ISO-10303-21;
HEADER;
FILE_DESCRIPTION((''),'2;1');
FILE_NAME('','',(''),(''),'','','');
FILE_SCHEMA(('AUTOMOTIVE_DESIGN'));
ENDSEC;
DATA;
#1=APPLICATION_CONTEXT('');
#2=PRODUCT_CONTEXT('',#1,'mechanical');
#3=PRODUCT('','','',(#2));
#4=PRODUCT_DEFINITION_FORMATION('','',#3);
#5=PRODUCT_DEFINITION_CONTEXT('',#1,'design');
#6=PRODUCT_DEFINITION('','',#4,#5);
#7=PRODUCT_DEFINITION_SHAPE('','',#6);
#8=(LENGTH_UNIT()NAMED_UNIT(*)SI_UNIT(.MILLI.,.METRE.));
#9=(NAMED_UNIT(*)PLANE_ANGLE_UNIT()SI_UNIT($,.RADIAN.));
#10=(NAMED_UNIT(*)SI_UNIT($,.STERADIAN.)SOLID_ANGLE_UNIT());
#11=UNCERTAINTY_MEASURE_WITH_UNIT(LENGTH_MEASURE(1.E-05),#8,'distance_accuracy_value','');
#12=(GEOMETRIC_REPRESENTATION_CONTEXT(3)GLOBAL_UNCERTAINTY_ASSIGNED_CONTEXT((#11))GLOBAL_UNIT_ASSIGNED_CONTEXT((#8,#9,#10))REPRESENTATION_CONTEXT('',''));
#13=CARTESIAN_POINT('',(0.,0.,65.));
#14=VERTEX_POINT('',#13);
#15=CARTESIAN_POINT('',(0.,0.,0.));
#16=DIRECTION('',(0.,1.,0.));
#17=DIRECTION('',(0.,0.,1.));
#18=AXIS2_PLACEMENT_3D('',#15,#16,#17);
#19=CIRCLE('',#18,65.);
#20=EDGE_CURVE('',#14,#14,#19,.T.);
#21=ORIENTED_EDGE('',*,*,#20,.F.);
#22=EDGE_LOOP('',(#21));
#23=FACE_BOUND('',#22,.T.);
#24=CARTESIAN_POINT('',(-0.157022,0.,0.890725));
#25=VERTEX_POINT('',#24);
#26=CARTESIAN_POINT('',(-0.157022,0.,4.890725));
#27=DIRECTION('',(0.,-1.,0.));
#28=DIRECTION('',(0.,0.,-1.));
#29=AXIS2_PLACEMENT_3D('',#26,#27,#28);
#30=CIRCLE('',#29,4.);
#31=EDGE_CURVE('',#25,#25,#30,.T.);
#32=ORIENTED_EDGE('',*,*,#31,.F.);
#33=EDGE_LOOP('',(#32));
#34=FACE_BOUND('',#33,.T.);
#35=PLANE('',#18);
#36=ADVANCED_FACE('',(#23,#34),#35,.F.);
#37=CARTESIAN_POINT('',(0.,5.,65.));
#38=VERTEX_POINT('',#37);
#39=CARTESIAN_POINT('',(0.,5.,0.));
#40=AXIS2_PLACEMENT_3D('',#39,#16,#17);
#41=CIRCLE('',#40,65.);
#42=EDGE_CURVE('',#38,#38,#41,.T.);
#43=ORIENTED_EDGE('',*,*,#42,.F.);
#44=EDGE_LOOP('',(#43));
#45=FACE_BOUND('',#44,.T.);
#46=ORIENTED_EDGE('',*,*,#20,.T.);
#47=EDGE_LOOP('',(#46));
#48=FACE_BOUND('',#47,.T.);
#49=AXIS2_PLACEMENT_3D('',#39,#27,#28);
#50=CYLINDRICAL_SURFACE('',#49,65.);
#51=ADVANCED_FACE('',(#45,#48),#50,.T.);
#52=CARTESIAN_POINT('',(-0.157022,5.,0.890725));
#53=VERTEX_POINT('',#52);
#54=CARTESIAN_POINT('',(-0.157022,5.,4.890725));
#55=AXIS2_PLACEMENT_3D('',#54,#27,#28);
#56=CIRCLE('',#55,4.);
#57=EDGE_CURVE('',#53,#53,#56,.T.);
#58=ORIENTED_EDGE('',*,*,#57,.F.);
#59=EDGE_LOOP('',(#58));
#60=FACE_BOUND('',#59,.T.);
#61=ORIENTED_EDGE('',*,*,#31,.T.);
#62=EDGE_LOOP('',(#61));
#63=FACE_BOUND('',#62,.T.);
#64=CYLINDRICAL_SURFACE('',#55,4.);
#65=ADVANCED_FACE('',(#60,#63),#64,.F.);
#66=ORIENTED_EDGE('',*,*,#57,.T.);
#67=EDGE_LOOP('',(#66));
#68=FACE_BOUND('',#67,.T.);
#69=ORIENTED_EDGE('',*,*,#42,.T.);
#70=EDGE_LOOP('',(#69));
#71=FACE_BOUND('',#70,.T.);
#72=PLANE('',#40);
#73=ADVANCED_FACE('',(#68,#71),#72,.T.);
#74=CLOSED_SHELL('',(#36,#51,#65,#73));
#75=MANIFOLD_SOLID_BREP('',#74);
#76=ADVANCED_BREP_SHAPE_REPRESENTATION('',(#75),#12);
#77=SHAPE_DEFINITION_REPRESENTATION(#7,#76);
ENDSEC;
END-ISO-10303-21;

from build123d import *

# Parameters (mm, degrees)
SKETCH1_R           = 65
BOSS_EXTRUDE1_DEPTH = 5
HOLE1_OUTLINE_R     = 4
HOLE1_DEPTH         = 5


# Read off the part's stored shape, not the designer's step: Hole1
with BuildPart() as part:
    # Sketch1 → Boss-Extrude1 (new body)
    with BuildSketch(Plane(origin=(0, 0, 0), x_dir=(1, 0, 0), z_dir=(0, 1, 0))):
        with Locations(Location((0, 0, 0), (0, 0, 270))):
            Circle(SKETCH1_R)
    extrude(amount=BOSS_EXTRUDE1_DEPTH)

    # Hole1 outline → Hole1 (cut)
    with BuildSketch(Plane(origin=(0, 0, 0), x_dir=(1, 0, 0), z_dir=(0, 1, 0))):
        with Locations((-0.157021517, -4.890725438)):
            Circle(HOLE1_OUTLINE_R)
    extrude(amount=HOLE1_DEPTH, mode=Mode.SUBTRACT)


solid = part.part
